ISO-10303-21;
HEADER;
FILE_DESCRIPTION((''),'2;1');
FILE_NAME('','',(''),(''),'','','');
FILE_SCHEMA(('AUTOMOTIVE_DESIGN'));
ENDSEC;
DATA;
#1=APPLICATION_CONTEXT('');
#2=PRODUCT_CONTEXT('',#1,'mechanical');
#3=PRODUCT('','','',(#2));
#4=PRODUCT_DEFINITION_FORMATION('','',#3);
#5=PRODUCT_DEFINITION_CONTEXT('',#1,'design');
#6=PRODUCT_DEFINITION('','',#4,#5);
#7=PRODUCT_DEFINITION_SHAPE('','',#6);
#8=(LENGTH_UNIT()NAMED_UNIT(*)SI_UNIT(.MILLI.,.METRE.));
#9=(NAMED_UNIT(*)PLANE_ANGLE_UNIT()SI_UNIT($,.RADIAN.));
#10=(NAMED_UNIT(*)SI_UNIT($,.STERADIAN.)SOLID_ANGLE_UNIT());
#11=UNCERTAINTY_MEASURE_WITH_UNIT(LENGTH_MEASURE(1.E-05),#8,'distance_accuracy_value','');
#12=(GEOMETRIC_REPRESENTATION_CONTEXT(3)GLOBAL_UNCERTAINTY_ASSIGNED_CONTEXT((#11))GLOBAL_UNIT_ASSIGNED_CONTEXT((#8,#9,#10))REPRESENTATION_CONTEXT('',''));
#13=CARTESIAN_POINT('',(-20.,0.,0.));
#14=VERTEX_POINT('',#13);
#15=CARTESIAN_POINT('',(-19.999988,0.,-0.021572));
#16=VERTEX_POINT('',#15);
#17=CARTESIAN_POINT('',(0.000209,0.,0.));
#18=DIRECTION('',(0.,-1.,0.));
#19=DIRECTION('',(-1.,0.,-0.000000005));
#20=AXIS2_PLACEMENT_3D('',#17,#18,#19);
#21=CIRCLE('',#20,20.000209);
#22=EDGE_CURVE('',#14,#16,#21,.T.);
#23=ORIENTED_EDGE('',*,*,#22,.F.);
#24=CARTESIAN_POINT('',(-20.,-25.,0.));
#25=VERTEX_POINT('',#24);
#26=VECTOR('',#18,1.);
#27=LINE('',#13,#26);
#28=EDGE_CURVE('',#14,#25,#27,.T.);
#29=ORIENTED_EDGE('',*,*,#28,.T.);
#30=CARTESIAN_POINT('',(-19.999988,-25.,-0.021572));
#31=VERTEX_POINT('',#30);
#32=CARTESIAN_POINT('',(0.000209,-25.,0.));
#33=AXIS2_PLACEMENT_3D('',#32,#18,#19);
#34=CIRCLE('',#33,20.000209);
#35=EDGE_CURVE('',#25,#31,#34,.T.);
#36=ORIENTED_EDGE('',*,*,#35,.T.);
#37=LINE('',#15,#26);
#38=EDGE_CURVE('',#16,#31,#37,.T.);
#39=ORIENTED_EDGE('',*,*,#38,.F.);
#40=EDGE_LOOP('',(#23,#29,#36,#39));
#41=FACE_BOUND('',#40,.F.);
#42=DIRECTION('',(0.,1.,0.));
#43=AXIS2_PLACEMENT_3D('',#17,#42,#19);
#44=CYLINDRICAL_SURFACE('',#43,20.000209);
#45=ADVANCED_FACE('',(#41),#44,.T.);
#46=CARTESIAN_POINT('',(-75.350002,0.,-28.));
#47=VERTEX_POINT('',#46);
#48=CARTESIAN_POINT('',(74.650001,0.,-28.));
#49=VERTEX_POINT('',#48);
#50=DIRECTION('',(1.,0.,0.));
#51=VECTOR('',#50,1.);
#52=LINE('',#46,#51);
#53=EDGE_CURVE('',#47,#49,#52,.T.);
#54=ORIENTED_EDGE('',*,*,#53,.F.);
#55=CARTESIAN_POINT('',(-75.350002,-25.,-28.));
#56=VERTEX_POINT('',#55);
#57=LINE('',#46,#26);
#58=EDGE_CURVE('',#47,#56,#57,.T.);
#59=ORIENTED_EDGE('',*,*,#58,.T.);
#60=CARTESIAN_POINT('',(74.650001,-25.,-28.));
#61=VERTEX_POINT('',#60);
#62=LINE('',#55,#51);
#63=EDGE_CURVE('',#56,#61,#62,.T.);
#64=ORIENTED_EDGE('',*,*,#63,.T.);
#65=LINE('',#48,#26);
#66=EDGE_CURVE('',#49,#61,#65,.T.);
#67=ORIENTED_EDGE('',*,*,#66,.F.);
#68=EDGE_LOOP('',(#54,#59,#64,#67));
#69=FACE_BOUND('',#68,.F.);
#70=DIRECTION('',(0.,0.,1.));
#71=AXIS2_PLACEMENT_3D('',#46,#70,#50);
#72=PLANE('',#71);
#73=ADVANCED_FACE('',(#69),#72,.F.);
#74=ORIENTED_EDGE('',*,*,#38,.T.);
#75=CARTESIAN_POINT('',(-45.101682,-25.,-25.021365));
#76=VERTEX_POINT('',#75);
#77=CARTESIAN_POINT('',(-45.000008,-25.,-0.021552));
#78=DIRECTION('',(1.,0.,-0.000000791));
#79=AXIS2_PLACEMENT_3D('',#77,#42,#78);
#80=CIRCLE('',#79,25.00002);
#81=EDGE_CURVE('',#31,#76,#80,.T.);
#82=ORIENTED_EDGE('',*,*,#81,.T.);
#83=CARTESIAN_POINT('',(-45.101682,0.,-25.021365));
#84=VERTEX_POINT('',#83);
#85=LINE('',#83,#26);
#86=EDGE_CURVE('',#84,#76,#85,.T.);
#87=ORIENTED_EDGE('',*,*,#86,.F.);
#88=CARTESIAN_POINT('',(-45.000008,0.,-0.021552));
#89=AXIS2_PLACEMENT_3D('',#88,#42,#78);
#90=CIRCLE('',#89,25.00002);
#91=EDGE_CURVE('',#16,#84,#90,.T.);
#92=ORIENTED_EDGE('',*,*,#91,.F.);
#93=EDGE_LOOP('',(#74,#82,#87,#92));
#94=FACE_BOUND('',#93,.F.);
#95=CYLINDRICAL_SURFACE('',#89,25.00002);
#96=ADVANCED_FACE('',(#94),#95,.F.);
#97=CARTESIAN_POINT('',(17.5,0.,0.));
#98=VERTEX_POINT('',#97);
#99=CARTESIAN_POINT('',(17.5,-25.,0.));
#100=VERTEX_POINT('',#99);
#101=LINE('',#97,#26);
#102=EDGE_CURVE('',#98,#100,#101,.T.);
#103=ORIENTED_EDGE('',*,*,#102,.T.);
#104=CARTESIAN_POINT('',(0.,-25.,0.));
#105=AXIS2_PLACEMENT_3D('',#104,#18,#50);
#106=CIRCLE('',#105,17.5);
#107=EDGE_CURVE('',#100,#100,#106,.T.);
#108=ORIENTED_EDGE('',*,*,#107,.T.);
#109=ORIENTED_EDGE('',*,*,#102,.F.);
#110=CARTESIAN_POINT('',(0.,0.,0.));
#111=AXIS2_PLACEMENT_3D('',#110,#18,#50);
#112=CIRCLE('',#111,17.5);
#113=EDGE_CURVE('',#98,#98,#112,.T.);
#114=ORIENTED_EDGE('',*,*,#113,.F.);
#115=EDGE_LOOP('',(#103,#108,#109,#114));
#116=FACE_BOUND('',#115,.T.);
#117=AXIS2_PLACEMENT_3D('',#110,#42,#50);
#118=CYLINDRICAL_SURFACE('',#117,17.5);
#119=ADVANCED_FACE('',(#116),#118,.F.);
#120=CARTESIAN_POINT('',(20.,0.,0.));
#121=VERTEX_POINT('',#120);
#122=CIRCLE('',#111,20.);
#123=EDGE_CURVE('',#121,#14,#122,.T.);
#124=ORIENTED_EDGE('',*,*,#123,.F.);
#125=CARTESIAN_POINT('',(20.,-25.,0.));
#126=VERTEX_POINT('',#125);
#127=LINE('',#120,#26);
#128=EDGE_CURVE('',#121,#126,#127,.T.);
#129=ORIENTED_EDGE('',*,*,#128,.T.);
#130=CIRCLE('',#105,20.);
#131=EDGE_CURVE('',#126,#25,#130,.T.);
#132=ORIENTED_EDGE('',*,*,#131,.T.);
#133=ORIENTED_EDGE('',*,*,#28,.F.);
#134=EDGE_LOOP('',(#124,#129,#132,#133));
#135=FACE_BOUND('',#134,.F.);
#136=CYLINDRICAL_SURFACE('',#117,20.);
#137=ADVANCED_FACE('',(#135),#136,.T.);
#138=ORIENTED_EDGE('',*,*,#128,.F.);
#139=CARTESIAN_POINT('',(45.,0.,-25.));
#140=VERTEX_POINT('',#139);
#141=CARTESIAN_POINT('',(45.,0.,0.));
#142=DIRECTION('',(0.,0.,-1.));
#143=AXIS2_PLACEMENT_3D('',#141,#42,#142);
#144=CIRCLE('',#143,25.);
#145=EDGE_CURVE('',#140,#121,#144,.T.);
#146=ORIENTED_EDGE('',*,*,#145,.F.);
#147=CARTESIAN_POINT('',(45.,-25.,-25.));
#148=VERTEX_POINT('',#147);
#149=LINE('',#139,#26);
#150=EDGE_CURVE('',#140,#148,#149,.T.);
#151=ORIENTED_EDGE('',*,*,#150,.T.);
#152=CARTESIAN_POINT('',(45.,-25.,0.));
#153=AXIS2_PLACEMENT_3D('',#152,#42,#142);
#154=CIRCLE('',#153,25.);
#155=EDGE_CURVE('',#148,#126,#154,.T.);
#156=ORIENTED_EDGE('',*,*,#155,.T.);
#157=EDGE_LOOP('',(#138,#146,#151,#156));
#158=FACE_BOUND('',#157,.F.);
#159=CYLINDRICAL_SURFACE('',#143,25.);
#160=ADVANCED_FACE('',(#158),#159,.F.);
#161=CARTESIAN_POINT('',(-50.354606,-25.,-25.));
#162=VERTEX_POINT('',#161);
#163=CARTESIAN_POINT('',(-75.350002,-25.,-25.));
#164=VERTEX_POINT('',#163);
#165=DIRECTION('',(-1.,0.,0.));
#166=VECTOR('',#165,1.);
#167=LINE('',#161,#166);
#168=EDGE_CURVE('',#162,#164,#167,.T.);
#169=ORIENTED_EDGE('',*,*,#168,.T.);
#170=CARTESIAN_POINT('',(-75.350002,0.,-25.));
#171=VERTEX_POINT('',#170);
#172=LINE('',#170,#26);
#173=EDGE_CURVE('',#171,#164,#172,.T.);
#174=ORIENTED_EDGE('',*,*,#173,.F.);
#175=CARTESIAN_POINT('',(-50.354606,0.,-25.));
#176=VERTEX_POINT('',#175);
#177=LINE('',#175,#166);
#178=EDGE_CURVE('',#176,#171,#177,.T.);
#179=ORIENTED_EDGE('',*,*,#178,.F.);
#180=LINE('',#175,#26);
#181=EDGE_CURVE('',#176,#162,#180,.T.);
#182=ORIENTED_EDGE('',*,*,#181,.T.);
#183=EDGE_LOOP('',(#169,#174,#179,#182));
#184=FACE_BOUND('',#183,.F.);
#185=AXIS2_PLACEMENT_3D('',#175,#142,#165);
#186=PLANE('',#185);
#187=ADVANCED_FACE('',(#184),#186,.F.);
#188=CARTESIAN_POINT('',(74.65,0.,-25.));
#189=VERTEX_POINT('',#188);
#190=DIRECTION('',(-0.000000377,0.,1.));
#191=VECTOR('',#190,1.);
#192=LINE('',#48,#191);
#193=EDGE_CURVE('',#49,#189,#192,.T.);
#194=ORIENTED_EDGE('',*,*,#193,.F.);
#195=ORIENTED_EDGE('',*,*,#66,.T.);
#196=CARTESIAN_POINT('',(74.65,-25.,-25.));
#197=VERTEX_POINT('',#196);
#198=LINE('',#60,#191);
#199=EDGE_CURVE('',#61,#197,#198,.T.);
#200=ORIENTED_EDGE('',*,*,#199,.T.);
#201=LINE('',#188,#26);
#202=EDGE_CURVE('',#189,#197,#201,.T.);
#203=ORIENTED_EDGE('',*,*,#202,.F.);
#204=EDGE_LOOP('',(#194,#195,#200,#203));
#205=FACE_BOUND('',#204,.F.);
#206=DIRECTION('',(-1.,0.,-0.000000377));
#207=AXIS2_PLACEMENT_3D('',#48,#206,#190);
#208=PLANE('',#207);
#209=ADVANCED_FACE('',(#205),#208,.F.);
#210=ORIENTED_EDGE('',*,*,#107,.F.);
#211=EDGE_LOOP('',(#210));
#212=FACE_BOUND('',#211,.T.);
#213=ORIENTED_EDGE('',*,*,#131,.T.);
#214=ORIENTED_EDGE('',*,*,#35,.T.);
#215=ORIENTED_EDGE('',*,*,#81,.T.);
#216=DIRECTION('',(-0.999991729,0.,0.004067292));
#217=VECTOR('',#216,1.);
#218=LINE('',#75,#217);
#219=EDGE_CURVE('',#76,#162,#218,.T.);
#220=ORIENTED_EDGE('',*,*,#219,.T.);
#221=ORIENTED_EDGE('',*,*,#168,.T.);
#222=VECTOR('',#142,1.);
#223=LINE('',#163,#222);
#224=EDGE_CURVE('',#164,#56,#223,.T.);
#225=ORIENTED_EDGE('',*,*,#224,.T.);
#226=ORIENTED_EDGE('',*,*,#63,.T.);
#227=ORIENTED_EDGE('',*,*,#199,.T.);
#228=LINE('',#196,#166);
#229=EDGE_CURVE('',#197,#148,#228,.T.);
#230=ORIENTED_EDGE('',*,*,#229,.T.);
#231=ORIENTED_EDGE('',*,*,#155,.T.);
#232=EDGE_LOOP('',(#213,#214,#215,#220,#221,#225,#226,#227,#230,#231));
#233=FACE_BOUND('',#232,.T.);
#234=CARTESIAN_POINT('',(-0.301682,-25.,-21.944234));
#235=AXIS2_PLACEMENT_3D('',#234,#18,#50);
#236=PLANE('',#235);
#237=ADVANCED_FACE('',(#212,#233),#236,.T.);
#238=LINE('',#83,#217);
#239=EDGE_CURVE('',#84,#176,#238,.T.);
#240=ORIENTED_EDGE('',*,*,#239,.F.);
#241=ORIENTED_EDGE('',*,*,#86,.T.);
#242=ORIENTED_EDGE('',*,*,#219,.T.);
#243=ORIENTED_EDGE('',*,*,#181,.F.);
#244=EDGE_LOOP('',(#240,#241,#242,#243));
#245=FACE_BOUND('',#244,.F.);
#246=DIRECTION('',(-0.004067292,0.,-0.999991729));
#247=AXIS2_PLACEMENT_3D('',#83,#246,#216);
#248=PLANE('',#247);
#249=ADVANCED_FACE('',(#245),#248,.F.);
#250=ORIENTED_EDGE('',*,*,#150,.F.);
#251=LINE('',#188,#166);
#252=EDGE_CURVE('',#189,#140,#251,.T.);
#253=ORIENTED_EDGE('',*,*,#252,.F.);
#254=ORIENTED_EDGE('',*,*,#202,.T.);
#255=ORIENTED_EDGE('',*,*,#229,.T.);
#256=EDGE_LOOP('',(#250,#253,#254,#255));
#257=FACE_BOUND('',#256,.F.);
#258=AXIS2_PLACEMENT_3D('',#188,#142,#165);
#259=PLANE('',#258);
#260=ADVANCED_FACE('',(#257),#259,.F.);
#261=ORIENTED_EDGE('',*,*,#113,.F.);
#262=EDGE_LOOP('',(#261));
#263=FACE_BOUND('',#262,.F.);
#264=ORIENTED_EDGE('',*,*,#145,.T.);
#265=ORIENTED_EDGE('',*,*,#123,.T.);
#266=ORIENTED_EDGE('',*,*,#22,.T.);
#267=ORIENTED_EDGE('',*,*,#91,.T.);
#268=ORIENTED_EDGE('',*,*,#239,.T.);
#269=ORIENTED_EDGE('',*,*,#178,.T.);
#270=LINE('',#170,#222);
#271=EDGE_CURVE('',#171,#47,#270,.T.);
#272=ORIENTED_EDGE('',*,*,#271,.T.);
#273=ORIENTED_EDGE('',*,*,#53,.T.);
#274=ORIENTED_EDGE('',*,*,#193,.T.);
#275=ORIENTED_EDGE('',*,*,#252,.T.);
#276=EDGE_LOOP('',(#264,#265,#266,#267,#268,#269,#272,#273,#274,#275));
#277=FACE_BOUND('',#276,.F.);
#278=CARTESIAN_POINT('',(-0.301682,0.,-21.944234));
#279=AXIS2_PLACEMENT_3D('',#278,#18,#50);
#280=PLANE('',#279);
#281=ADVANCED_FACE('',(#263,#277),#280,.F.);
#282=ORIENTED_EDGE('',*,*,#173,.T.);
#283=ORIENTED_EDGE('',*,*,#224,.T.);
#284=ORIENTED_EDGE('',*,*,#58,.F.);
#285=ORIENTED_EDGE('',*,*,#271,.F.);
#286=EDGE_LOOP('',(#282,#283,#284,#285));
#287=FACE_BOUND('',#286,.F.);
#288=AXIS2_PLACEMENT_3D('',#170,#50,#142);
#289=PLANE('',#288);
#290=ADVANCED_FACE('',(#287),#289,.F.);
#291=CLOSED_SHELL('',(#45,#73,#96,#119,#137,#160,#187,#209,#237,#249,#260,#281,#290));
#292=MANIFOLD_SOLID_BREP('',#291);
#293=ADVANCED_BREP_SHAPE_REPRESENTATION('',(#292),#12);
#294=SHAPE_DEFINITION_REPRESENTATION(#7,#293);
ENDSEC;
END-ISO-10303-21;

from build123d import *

# Parameters (mm, degrees)
F0_R     = 17.5
F1_DEPTH = 25


# Not quite as in the source:
# - ends of sketch curves that miss each other by under 0.0002 mm in the source are joined


with BuildPart() as f1:
    # F0 (on Front) → F1 (new body)
    with BuildSketch(Plane.XZ):
        with BuildLine():
            ThreePointArc((45, -25), (27.3223304703, -17.6776695297), (20, 0))
            ThreePointArc((20, 0), (0.0107860663, -19.9999970915), (-19.9999883661, -0.0215721294))
            ThreePointArc((-19.9999883661, -0.0215721294), (-27.3583172251, -17.7351553161), (-45.1016823096, -25.0213653552))
            Line((-45.1016823096, -25.0213653552), (-50.3546064898, -25))
            Line((-50.3546064898, -25), (-75.3500018494, -25))
            Line((-75.3500018494, -25), (-75.3500018494, -28))
            Line((-75.3500018494, -28), (74.6500011308, -28))
            Line((74.6500011308, -28), (74.65, -25))
            Line((74.65, -25), (50.3546064898, -25))
            Line((50.3546064898, -25), (45, -25))
        make_face()
        with BuildLine():
            ThreePointArc((-19.9999883661, -0.0215721294), (0.0107860663, -19.9999970915), (20, 0))
            ThreePointArc((20, 0), (0, 20), (-20, 0))
            ThreePointArc((-20, 0), (-19.9999970915, -0.0107860663), (-19.9999883661, -0.0215721294))
        make_face()
        Circle(F0_R, mode=Mode.SUBTRACT)
    extrude(amount=F1_DEPTH)


solid = f1.part
